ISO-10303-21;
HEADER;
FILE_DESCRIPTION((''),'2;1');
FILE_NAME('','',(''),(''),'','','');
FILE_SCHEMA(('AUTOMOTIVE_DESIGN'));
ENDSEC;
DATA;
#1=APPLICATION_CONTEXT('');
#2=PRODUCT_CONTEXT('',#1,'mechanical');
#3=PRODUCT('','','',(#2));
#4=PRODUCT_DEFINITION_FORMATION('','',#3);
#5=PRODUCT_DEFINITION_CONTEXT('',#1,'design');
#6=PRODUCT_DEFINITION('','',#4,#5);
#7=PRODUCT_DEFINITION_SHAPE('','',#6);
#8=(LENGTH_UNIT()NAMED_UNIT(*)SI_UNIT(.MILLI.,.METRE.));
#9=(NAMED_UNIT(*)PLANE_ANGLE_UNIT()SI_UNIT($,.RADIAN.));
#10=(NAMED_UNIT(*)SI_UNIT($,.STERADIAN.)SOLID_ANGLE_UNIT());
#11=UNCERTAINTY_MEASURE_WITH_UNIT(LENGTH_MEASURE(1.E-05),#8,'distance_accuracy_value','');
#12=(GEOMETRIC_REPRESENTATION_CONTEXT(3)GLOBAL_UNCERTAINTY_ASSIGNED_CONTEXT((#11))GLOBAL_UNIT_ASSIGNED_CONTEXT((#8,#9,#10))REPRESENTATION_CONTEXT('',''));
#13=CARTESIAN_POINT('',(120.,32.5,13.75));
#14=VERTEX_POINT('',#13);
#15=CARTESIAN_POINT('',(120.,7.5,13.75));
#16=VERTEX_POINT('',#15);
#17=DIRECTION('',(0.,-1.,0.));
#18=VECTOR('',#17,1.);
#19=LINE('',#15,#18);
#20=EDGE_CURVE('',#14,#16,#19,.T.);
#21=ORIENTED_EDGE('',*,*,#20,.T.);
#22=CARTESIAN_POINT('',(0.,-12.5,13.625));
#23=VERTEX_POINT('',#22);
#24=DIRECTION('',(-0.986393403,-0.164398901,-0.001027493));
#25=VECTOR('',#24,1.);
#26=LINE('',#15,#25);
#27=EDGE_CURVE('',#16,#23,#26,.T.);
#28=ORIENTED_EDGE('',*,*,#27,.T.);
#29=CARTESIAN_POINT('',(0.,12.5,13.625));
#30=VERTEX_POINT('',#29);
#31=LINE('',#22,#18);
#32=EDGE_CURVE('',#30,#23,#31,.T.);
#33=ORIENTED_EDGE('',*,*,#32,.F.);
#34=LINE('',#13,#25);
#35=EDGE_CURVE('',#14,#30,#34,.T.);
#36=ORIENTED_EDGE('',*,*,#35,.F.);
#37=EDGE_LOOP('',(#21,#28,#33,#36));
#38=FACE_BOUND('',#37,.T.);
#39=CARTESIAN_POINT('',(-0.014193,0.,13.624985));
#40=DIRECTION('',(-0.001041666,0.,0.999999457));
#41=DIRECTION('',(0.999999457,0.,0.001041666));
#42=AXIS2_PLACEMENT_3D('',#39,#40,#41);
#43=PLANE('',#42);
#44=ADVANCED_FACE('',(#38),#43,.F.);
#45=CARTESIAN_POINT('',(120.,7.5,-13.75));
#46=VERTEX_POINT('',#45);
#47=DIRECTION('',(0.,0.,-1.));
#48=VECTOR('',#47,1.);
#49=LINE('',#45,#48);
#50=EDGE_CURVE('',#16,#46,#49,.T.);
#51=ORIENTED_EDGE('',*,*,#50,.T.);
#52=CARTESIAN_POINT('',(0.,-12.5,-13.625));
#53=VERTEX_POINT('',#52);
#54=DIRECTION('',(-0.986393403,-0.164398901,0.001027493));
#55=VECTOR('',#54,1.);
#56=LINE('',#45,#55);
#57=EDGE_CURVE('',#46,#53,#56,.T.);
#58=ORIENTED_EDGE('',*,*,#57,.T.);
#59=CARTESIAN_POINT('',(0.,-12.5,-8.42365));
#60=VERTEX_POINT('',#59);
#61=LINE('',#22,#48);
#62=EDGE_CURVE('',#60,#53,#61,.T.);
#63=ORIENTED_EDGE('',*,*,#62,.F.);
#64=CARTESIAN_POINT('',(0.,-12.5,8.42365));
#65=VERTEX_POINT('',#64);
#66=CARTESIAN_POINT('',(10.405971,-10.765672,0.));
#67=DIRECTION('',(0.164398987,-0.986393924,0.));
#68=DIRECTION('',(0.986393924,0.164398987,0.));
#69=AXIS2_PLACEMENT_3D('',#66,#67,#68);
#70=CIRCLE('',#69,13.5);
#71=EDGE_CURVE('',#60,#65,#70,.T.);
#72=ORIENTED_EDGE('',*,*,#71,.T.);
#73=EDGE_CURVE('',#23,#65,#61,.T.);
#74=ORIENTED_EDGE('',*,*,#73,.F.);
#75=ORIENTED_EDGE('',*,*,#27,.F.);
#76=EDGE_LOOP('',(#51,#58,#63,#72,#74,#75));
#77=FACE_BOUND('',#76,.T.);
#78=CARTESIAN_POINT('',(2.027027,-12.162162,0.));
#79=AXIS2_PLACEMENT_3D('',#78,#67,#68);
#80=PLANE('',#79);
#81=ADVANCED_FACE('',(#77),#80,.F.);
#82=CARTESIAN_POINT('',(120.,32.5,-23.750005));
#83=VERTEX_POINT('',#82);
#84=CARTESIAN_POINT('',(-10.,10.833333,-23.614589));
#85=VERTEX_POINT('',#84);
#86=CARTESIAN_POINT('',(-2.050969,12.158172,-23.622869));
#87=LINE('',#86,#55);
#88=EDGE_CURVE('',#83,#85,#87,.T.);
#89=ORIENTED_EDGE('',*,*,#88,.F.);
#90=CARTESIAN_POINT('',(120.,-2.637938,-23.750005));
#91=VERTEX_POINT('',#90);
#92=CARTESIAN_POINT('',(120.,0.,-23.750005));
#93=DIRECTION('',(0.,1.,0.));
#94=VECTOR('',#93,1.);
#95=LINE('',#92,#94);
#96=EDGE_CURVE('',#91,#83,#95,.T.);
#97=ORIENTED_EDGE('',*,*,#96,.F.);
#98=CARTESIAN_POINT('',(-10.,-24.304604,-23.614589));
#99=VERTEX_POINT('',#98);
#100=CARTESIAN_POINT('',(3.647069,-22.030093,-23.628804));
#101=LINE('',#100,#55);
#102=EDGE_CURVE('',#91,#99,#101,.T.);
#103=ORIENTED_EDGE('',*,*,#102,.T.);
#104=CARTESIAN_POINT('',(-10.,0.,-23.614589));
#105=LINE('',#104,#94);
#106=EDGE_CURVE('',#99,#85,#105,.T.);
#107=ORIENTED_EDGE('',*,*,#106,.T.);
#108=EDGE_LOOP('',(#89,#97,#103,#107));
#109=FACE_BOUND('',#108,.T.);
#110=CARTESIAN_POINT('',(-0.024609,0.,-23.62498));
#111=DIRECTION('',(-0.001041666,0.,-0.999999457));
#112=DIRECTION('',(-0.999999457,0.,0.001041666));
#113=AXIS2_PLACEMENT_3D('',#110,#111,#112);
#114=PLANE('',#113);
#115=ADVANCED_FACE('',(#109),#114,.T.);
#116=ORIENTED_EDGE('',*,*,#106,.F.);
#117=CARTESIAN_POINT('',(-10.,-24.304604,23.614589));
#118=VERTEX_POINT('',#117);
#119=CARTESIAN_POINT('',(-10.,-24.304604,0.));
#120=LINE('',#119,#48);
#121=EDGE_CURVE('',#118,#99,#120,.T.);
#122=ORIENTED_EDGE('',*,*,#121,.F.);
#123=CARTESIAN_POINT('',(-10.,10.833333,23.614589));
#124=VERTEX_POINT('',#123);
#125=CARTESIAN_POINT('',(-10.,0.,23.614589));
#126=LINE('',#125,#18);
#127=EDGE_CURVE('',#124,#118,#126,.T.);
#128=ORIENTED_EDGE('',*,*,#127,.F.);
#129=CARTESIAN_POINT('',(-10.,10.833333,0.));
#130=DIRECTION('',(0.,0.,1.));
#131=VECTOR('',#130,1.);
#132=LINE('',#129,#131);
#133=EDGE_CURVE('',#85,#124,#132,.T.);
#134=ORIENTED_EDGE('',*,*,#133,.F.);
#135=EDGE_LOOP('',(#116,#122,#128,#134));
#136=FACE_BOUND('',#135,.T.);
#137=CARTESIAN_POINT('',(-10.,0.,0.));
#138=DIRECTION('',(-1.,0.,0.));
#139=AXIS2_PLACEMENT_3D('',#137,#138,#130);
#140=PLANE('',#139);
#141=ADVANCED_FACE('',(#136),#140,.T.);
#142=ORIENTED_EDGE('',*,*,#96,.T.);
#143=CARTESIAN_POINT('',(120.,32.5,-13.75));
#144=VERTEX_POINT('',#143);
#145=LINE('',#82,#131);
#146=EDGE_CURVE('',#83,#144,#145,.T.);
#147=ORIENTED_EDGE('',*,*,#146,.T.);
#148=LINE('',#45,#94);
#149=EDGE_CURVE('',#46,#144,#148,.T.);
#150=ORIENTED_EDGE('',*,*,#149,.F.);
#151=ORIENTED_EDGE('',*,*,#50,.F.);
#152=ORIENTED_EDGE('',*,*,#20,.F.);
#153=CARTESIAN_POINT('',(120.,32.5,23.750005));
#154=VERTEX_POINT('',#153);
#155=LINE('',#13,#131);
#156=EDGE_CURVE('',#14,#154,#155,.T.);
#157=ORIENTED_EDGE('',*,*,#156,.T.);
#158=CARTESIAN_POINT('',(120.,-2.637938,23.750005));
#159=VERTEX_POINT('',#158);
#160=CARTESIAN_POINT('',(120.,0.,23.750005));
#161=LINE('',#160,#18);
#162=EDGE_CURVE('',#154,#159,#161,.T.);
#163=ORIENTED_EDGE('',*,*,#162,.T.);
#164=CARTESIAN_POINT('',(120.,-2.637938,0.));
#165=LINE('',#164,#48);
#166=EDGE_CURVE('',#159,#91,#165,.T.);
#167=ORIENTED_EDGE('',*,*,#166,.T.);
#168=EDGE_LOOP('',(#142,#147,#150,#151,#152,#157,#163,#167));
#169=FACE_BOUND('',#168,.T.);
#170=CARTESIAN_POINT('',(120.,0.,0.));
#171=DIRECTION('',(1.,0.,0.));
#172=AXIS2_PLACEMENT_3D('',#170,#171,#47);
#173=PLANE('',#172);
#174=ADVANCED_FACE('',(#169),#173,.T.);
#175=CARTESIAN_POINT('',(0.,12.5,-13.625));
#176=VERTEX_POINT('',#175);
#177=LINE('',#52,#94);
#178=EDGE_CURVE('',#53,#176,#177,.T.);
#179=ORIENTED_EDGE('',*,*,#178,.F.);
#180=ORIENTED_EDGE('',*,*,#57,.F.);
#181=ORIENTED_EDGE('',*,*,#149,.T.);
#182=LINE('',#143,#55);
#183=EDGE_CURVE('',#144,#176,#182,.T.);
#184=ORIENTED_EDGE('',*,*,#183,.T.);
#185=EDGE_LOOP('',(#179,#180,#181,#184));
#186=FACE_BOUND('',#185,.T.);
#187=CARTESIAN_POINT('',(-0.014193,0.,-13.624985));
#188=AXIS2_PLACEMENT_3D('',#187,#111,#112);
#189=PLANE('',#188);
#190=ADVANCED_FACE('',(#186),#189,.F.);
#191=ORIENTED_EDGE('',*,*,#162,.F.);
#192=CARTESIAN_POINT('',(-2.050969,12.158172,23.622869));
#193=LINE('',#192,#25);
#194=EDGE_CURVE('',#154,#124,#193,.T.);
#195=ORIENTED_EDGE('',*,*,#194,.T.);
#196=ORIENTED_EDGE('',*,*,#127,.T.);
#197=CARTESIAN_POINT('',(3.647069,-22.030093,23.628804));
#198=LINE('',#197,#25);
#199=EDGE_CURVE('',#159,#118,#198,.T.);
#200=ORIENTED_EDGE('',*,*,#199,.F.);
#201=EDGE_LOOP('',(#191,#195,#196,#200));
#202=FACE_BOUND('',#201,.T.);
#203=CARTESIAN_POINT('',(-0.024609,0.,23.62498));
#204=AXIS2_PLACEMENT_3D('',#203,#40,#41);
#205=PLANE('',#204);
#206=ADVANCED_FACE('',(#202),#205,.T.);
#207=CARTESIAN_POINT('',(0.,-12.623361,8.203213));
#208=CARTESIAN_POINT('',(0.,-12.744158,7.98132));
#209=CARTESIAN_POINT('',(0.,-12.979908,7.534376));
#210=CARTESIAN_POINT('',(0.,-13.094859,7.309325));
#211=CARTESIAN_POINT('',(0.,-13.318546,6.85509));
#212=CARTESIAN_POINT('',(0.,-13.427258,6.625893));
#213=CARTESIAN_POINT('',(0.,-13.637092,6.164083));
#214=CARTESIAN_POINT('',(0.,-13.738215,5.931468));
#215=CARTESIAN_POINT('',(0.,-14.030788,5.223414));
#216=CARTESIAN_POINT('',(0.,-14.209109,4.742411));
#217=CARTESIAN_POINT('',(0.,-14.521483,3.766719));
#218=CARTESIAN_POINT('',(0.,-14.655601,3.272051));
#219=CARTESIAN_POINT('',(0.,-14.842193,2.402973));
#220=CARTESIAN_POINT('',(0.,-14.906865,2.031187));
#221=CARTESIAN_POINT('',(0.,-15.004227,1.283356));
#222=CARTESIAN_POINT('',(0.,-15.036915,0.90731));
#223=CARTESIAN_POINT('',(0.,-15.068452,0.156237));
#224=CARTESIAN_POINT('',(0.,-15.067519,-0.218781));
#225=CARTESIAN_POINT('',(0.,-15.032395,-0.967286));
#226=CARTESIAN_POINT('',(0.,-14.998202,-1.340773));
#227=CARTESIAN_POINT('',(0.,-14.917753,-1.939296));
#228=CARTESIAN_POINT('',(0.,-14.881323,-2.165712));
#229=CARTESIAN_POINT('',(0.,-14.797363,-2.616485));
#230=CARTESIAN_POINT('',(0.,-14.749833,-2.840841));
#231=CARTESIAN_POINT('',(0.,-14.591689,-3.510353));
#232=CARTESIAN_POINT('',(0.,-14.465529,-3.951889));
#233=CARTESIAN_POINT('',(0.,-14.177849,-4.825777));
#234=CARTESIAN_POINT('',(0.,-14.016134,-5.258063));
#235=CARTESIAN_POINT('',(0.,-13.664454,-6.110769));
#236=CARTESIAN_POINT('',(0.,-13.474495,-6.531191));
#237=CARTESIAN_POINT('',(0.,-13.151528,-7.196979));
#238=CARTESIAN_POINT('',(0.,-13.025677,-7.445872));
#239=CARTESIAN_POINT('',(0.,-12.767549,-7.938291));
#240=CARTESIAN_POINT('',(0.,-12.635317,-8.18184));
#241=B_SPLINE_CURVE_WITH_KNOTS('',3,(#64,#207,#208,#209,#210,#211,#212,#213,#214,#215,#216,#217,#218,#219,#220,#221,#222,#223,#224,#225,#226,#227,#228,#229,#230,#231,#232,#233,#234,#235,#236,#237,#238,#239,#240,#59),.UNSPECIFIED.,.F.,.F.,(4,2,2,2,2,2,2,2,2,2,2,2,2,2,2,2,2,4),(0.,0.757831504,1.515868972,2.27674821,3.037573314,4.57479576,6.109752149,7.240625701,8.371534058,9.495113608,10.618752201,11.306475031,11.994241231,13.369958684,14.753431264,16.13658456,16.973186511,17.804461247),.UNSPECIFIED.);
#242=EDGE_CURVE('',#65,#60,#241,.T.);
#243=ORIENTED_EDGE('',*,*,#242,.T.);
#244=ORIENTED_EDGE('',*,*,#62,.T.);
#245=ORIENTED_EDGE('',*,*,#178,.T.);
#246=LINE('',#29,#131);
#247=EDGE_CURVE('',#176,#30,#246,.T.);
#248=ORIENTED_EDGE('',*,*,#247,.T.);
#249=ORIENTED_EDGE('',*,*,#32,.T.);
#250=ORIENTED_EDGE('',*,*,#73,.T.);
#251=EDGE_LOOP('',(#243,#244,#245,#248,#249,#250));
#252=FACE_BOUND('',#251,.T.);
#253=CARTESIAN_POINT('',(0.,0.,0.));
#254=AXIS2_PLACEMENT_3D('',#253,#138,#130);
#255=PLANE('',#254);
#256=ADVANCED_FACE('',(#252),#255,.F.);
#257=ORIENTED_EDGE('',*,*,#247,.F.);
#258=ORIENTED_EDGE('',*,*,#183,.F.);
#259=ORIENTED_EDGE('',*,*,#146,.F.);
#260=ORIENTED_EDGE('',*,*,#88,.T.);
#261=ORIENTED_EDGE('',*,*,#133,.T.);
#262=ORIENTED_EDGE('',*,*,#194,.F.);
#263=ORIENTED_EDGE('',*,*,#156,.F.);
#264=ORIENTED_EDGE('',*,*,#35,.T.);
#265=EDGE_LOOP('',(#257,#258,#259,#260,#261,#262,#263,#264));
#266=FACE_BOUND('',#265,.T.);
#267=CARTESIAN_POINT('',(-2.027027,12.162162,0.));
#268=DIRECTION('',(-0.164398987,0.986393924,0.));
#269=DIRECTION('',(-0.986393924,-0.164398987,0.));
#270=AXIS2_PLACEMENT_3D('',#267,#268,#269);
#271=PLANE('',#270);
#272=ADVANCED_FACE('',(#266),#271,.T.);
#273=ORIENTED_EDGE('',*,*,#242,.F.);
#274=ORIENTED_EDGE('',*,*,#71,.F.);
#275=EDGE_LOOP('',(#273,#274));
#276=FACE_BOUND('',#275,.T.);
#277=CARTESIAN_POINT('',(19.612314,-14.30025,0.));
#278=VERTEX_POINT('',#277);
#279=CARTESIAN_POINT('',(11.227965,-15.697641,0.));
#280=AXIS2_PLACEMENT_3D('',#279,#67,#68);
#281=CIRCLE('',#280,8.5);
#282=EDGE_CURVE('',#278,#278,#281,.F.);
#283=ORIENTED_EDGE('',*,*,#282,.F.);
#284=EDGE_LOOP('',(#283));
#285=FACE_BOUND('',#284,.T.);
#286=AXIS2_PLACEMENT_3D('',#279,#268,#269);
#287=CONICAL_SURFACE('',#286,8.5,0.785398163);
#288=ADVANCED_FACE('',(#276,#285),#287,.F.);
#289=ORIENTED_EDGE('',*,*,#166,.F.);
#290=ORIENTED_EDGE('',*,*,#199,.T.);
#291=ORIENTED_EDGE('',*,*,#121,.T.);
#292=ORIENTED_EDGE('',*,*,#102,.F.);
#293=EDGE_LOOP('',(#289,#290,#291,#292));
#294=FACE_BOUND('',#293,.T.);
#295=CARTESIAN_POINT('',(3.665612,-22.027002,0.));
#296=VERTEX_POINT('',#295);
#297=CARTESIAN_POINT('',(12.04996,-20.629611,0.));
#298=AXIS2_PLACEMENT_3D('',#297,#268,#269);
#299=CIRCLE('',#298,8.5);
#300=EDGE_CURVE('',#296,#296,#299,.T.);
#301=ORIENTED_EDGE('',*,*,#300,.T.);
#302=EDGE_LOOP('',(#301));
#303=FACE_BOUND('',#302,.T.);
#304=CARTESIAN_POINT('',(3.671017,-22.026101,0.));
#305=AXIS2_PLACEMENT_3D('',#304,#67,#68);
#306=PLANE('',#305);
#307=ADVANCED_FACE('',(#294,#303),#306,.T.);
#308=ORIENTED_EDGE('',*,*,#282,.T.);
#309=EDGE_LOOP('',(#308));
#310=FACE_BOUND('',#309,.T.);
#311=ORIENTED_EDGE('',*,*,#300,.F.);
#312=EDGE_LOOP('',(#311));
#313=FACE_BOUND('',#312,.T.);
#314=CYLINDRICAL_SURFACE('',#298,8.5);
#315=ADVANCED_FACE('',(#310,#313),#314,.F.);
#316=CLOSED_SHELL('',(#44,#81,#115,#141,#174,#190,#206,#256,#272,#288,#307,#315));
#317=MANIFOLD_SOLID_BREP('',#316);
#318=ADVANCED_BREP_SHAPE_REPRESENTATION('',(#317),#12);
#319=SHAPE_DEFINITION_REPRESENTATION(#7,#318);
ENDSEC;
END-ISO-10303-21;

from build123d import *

# Parameters (mm, degrees)
SHELL3_T           = 10
SKETCH5_R          = 8.5
CUT_EXTRUDE1_DEPTH = 10
CHAMFER2_SIZE      = 5


with BuildPart() as part:
    # Sketch4 → Loft3 section 0
    with BuildSketch(Plane(origin=(120, 0, 0), x_dir=(0, 0, -1), z_dir=(1, 0, 0))):
        with BuildLine():
            Line((13.75, 7.5), (-13.75, 7.5))
            Line((-13.75, 7.5), (-13.75, 32.5))
            Line((-13.75, 32.5), (13.75, 32.5))
            Line((13.75, 32.5), (13.75, 7.5))
        make_face()
    # Sketch1 → Loft3 section 1
    with BuildSketch(Plane(origin=(0, 0, 0), x_dir=(0, 0, -1), z_dir=(1, 0, 0))):
        with BuildLine():
            Line((-13.625, -12.5), (13.625, -12.5))
            Line((13.625, -12.5), (13.625, 12.5))
            Line((13.625, 12.5), (-13.625, 12.5))
            Line((-13.625, 12.5), (-13.625, -12.5))
        make_face()
    loft()

    # Shell3
    shell3_openings = [part.faces().sort_by_distance(p)[0] for p in [
        (60.091324201, 22.5152207, 0),
        (120, 20, 0),
    ]]
    offset(amount=SHELL3_T, openings=shell3_openings, kind=Kind.INTERSECTION)

    # Sketch5 → Cut-Extrude1 (cut)
    with BuildSketch(Plane(origin=(2.027027027, -12.162162162, 0), x_dir=(0.9863939238321439, 0.1643989873053572, 0), z_dir=(-0.1643989873053572, 0.9863939238321439, 0))):
        with Locations(Location((8.494520618, 0, 0), (0, 0, 180))):
            Circle(SKETCH5_R)
    extrude(amount=-CUT_EXTRUDE1_DEPTH, mode=Mode.SUBTRACT)

    # Chamfer2
    # the kernel refuses this chamfer: 5 mm, written as the material it takes off along each edge
    with BuildSketch(Plane(origin=(10.40597055, -10.765671575, 0), x_dir=(-0.9863939238321437, -0.1643989873053573, 0), z_dir=(0, 0, -1))) as chamfer2_piece_1_section:
        Polygon((8.5 + CHAMFER2_SIZE, 0), (8.5, -CHAMFER2_SIZE), (8.5, 0), align=None)
    chamfer2_piece_1 = revolve(axis=Axis((10.40597055, -10.765671575, 0), (-0.1643989873053572, 0.9863939238321439, 0)), mode=Mode.PRIVATE)
    chamfer2_piece_1 = split(chamfer2_piece_1, bisect_by=Plane(origin=(0, -11.368477015, 0), z_dir=(1, 0, 0)), keep=Keep.TOP, mode=Mode.PRIVATE)
    add(chamfer2_piece_1, mode=Mode.SUBTRACT)


solid = part.part
